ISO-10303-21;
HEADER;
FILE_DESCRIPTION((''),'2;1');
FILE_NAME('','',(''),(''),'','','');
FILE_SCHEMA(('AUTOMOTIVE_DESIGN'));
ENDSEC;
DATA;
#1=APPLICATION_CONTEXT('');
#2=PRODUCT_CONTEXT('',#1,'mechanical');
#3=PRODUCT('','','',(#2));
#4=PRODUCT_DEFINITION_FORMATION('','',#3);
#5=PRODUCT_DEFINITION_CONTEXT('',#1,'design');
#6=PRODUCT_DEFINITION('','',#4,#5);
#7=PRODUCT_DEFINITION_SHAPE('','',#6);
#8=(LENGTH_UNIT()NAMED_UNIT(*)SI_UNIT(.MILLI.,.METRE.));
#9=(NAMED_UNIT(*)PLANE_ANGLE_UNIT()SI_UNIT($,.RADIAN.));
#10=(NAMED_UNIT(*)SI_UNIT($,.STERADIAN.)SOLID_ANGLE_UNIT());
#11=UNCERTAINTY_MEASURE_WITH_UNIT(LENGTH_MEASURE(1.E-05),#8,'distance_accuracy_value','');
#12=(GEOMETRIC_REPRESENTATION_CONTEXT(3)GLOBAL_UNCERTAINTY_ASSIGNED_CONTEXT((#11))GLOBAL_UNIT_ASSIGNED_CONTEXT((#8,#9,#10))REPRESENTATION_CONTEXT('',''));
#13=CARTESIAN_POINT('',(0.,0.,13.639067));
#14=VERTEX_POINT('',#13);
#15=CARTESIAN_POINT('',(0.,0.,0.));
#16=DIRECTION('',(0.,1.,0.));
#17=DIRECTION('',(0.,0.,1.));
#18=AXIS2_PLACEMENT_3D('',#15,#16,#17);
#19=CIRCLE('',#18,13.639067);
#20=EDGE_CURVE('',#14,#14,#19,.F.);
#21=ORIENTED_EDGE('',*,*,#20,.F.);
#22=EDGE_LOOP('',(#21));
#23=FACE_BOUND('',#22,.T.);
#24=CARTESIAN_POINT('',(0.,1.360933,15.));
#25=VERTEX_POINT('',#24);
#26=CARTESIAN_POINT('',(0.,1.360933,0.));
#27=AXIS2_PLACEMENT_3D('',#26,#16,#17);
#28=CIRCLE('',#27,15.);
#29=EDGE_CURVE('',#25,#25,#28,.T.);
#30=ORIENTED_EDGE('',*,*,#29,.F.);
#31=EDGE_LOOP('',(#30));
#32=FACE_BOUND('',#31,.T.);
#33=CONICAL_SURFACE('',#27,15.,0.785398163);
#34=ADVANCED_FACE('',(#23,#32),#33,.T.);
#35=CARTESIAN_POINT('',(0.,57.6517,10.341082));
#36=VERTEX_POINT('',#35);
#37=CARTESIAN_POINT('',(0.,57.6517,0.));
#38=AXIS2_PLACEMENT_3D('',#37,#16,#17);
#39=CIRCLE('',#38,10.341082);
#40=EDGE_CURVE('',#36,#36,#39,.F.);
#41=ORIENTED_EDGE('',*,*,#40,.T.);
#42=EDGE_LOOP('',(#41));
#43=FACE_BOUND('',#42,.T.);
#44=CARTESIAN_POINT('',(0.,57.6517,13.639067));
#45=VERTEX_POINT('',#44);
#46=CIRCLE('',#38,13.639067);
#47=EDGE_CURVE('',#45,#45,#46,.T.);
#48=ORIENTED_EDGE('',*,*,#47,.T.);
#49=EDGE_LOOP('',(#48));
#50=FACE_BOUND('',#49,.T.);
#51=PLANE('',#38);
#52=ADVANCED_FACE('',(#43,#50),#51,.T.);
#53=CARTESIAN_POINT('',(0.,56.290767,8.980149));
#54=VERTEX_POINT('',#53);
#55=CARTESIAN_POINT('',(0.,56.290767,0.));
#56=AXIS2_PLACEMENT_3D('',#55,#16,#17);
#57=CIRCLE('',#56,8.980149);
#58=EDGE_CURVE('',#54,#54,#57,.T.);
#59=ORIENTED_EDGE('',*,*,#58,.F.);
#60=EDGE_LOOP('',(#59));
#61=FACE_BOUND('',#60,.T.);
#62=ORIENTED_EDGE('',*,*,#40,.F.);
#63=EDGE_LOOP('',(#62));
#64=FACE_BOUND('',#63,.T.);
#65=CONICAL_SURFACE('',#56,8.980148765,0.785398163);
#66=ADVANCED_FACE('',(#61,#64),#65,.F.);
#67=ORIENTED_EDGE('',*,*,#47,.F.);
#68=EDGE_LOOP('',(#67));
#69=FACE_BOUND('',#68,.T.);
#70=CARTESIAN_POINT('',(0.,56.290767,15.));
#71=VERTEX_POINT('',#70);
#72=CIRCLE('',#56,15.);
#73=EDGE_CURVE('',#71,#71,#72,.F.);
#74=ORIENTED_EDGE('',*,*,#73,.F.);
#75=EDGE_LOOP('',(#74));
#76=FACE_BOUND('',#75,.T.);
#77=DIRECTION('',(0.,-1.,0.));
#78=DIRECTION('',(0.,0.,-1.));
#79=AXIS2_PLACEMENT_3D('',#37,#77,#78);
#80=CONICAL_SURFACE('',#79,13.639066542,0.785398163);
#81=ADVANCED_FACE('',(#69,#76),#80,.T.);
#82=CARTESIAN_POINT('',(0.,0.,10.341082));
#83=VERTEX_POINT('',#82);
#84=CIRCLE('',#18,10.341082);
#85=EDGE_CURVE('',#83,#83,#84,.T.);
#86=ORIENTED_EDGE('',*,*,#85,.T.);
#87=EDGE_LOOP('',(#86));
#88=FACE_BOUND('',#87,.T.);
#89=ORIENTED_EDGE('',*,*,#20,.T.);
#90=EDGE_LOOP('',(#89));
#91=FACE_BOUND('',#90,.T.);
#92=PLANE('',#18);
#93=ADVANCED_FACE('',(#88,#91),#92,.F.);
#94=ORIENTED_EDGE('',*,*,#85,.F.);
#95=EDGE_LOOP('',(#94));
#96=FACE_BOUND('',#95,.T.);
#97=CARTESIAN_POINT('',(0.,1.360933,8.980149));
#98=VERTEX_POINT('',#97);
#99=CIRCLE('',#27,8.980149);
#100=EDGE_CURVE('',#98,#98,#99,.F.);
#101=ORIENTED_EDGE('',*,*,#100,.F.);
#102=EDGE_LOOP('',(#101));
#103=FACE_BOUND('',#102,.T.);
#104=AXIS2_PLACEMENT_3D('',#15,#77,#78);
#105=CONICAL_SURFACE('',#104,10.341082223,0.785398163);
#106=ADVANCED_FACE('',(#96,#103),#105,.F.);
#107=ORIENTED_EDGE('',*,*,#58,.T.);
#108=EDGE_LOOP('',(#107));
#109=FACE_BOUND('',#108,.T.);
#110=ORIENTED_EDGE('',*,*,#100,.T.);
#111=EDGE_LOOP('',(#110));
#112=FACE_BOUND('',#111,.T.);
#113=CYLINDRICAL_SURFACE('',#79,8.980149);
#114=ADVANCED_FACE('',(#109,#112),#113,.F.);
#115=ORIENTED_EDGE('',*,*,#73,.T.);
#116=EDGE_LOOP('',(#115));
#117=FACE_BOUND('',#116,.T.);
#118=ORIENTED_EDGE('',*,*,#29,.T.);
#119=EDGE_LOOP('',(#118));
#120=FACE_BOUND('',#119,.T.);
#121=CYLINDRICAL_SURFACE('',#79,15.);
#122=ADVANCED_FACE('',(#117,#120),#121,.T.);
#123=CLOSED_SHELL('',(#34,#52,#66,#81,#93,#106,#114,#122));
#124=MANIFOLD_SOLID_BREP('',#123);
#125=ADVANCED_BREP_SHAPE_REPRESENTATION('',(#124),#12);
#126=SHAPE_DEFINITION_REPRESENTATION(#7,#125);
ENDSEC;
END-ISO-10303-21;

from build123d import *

# Parameters (mm, degrees)
SKETCH1_R           = 15
BOSS_EXTRUDE1_DEPTH = 57.651700471
SKETCH2_R           = 8.980148765
CUT_EXTRUDE1_DEPTH  = 62.4305996
CHAMFER1_SIZE       = 1.360933458


with BuildPart() as part:
    # Sketch1 → Boss-Extrude1 (new body)
    with BuildSketch(Plane(origin=(0, 0, 0), x_dir=(1, 0, 0), z_dir=(0, 1, 0))):
        Circle(SKETCH1_R)
    extrude(amount=BOSS_EXTRUDE1_DEPTH)

    # Sketch2 → Cut-Extrude1 (cut, through all)
    with BuildSketch(Plane(origin=(0, 0, 0), x_dir=(1, 0, 0), z_dir=(0, 1, 0))):
        Circle(SKETCH2_R)
    extrude(amount=CUT_EXTRUDE1_DEPTH, mode=Mode.SUBTRACT)

    # Chamfer1
    chamfer1_edges = [part.edges().sort_by_distance(p)[0] for p in [
        (-8.980148765, 57.651700471, 0),
        (-8.980148765, 0, 0),
        (-15, 0, 0),
        (-15, 57.651700471, 0),
    ]]
    chamfer(chamfer1_edges, length=CHAMFER1_SIZE)


solid = part.part
